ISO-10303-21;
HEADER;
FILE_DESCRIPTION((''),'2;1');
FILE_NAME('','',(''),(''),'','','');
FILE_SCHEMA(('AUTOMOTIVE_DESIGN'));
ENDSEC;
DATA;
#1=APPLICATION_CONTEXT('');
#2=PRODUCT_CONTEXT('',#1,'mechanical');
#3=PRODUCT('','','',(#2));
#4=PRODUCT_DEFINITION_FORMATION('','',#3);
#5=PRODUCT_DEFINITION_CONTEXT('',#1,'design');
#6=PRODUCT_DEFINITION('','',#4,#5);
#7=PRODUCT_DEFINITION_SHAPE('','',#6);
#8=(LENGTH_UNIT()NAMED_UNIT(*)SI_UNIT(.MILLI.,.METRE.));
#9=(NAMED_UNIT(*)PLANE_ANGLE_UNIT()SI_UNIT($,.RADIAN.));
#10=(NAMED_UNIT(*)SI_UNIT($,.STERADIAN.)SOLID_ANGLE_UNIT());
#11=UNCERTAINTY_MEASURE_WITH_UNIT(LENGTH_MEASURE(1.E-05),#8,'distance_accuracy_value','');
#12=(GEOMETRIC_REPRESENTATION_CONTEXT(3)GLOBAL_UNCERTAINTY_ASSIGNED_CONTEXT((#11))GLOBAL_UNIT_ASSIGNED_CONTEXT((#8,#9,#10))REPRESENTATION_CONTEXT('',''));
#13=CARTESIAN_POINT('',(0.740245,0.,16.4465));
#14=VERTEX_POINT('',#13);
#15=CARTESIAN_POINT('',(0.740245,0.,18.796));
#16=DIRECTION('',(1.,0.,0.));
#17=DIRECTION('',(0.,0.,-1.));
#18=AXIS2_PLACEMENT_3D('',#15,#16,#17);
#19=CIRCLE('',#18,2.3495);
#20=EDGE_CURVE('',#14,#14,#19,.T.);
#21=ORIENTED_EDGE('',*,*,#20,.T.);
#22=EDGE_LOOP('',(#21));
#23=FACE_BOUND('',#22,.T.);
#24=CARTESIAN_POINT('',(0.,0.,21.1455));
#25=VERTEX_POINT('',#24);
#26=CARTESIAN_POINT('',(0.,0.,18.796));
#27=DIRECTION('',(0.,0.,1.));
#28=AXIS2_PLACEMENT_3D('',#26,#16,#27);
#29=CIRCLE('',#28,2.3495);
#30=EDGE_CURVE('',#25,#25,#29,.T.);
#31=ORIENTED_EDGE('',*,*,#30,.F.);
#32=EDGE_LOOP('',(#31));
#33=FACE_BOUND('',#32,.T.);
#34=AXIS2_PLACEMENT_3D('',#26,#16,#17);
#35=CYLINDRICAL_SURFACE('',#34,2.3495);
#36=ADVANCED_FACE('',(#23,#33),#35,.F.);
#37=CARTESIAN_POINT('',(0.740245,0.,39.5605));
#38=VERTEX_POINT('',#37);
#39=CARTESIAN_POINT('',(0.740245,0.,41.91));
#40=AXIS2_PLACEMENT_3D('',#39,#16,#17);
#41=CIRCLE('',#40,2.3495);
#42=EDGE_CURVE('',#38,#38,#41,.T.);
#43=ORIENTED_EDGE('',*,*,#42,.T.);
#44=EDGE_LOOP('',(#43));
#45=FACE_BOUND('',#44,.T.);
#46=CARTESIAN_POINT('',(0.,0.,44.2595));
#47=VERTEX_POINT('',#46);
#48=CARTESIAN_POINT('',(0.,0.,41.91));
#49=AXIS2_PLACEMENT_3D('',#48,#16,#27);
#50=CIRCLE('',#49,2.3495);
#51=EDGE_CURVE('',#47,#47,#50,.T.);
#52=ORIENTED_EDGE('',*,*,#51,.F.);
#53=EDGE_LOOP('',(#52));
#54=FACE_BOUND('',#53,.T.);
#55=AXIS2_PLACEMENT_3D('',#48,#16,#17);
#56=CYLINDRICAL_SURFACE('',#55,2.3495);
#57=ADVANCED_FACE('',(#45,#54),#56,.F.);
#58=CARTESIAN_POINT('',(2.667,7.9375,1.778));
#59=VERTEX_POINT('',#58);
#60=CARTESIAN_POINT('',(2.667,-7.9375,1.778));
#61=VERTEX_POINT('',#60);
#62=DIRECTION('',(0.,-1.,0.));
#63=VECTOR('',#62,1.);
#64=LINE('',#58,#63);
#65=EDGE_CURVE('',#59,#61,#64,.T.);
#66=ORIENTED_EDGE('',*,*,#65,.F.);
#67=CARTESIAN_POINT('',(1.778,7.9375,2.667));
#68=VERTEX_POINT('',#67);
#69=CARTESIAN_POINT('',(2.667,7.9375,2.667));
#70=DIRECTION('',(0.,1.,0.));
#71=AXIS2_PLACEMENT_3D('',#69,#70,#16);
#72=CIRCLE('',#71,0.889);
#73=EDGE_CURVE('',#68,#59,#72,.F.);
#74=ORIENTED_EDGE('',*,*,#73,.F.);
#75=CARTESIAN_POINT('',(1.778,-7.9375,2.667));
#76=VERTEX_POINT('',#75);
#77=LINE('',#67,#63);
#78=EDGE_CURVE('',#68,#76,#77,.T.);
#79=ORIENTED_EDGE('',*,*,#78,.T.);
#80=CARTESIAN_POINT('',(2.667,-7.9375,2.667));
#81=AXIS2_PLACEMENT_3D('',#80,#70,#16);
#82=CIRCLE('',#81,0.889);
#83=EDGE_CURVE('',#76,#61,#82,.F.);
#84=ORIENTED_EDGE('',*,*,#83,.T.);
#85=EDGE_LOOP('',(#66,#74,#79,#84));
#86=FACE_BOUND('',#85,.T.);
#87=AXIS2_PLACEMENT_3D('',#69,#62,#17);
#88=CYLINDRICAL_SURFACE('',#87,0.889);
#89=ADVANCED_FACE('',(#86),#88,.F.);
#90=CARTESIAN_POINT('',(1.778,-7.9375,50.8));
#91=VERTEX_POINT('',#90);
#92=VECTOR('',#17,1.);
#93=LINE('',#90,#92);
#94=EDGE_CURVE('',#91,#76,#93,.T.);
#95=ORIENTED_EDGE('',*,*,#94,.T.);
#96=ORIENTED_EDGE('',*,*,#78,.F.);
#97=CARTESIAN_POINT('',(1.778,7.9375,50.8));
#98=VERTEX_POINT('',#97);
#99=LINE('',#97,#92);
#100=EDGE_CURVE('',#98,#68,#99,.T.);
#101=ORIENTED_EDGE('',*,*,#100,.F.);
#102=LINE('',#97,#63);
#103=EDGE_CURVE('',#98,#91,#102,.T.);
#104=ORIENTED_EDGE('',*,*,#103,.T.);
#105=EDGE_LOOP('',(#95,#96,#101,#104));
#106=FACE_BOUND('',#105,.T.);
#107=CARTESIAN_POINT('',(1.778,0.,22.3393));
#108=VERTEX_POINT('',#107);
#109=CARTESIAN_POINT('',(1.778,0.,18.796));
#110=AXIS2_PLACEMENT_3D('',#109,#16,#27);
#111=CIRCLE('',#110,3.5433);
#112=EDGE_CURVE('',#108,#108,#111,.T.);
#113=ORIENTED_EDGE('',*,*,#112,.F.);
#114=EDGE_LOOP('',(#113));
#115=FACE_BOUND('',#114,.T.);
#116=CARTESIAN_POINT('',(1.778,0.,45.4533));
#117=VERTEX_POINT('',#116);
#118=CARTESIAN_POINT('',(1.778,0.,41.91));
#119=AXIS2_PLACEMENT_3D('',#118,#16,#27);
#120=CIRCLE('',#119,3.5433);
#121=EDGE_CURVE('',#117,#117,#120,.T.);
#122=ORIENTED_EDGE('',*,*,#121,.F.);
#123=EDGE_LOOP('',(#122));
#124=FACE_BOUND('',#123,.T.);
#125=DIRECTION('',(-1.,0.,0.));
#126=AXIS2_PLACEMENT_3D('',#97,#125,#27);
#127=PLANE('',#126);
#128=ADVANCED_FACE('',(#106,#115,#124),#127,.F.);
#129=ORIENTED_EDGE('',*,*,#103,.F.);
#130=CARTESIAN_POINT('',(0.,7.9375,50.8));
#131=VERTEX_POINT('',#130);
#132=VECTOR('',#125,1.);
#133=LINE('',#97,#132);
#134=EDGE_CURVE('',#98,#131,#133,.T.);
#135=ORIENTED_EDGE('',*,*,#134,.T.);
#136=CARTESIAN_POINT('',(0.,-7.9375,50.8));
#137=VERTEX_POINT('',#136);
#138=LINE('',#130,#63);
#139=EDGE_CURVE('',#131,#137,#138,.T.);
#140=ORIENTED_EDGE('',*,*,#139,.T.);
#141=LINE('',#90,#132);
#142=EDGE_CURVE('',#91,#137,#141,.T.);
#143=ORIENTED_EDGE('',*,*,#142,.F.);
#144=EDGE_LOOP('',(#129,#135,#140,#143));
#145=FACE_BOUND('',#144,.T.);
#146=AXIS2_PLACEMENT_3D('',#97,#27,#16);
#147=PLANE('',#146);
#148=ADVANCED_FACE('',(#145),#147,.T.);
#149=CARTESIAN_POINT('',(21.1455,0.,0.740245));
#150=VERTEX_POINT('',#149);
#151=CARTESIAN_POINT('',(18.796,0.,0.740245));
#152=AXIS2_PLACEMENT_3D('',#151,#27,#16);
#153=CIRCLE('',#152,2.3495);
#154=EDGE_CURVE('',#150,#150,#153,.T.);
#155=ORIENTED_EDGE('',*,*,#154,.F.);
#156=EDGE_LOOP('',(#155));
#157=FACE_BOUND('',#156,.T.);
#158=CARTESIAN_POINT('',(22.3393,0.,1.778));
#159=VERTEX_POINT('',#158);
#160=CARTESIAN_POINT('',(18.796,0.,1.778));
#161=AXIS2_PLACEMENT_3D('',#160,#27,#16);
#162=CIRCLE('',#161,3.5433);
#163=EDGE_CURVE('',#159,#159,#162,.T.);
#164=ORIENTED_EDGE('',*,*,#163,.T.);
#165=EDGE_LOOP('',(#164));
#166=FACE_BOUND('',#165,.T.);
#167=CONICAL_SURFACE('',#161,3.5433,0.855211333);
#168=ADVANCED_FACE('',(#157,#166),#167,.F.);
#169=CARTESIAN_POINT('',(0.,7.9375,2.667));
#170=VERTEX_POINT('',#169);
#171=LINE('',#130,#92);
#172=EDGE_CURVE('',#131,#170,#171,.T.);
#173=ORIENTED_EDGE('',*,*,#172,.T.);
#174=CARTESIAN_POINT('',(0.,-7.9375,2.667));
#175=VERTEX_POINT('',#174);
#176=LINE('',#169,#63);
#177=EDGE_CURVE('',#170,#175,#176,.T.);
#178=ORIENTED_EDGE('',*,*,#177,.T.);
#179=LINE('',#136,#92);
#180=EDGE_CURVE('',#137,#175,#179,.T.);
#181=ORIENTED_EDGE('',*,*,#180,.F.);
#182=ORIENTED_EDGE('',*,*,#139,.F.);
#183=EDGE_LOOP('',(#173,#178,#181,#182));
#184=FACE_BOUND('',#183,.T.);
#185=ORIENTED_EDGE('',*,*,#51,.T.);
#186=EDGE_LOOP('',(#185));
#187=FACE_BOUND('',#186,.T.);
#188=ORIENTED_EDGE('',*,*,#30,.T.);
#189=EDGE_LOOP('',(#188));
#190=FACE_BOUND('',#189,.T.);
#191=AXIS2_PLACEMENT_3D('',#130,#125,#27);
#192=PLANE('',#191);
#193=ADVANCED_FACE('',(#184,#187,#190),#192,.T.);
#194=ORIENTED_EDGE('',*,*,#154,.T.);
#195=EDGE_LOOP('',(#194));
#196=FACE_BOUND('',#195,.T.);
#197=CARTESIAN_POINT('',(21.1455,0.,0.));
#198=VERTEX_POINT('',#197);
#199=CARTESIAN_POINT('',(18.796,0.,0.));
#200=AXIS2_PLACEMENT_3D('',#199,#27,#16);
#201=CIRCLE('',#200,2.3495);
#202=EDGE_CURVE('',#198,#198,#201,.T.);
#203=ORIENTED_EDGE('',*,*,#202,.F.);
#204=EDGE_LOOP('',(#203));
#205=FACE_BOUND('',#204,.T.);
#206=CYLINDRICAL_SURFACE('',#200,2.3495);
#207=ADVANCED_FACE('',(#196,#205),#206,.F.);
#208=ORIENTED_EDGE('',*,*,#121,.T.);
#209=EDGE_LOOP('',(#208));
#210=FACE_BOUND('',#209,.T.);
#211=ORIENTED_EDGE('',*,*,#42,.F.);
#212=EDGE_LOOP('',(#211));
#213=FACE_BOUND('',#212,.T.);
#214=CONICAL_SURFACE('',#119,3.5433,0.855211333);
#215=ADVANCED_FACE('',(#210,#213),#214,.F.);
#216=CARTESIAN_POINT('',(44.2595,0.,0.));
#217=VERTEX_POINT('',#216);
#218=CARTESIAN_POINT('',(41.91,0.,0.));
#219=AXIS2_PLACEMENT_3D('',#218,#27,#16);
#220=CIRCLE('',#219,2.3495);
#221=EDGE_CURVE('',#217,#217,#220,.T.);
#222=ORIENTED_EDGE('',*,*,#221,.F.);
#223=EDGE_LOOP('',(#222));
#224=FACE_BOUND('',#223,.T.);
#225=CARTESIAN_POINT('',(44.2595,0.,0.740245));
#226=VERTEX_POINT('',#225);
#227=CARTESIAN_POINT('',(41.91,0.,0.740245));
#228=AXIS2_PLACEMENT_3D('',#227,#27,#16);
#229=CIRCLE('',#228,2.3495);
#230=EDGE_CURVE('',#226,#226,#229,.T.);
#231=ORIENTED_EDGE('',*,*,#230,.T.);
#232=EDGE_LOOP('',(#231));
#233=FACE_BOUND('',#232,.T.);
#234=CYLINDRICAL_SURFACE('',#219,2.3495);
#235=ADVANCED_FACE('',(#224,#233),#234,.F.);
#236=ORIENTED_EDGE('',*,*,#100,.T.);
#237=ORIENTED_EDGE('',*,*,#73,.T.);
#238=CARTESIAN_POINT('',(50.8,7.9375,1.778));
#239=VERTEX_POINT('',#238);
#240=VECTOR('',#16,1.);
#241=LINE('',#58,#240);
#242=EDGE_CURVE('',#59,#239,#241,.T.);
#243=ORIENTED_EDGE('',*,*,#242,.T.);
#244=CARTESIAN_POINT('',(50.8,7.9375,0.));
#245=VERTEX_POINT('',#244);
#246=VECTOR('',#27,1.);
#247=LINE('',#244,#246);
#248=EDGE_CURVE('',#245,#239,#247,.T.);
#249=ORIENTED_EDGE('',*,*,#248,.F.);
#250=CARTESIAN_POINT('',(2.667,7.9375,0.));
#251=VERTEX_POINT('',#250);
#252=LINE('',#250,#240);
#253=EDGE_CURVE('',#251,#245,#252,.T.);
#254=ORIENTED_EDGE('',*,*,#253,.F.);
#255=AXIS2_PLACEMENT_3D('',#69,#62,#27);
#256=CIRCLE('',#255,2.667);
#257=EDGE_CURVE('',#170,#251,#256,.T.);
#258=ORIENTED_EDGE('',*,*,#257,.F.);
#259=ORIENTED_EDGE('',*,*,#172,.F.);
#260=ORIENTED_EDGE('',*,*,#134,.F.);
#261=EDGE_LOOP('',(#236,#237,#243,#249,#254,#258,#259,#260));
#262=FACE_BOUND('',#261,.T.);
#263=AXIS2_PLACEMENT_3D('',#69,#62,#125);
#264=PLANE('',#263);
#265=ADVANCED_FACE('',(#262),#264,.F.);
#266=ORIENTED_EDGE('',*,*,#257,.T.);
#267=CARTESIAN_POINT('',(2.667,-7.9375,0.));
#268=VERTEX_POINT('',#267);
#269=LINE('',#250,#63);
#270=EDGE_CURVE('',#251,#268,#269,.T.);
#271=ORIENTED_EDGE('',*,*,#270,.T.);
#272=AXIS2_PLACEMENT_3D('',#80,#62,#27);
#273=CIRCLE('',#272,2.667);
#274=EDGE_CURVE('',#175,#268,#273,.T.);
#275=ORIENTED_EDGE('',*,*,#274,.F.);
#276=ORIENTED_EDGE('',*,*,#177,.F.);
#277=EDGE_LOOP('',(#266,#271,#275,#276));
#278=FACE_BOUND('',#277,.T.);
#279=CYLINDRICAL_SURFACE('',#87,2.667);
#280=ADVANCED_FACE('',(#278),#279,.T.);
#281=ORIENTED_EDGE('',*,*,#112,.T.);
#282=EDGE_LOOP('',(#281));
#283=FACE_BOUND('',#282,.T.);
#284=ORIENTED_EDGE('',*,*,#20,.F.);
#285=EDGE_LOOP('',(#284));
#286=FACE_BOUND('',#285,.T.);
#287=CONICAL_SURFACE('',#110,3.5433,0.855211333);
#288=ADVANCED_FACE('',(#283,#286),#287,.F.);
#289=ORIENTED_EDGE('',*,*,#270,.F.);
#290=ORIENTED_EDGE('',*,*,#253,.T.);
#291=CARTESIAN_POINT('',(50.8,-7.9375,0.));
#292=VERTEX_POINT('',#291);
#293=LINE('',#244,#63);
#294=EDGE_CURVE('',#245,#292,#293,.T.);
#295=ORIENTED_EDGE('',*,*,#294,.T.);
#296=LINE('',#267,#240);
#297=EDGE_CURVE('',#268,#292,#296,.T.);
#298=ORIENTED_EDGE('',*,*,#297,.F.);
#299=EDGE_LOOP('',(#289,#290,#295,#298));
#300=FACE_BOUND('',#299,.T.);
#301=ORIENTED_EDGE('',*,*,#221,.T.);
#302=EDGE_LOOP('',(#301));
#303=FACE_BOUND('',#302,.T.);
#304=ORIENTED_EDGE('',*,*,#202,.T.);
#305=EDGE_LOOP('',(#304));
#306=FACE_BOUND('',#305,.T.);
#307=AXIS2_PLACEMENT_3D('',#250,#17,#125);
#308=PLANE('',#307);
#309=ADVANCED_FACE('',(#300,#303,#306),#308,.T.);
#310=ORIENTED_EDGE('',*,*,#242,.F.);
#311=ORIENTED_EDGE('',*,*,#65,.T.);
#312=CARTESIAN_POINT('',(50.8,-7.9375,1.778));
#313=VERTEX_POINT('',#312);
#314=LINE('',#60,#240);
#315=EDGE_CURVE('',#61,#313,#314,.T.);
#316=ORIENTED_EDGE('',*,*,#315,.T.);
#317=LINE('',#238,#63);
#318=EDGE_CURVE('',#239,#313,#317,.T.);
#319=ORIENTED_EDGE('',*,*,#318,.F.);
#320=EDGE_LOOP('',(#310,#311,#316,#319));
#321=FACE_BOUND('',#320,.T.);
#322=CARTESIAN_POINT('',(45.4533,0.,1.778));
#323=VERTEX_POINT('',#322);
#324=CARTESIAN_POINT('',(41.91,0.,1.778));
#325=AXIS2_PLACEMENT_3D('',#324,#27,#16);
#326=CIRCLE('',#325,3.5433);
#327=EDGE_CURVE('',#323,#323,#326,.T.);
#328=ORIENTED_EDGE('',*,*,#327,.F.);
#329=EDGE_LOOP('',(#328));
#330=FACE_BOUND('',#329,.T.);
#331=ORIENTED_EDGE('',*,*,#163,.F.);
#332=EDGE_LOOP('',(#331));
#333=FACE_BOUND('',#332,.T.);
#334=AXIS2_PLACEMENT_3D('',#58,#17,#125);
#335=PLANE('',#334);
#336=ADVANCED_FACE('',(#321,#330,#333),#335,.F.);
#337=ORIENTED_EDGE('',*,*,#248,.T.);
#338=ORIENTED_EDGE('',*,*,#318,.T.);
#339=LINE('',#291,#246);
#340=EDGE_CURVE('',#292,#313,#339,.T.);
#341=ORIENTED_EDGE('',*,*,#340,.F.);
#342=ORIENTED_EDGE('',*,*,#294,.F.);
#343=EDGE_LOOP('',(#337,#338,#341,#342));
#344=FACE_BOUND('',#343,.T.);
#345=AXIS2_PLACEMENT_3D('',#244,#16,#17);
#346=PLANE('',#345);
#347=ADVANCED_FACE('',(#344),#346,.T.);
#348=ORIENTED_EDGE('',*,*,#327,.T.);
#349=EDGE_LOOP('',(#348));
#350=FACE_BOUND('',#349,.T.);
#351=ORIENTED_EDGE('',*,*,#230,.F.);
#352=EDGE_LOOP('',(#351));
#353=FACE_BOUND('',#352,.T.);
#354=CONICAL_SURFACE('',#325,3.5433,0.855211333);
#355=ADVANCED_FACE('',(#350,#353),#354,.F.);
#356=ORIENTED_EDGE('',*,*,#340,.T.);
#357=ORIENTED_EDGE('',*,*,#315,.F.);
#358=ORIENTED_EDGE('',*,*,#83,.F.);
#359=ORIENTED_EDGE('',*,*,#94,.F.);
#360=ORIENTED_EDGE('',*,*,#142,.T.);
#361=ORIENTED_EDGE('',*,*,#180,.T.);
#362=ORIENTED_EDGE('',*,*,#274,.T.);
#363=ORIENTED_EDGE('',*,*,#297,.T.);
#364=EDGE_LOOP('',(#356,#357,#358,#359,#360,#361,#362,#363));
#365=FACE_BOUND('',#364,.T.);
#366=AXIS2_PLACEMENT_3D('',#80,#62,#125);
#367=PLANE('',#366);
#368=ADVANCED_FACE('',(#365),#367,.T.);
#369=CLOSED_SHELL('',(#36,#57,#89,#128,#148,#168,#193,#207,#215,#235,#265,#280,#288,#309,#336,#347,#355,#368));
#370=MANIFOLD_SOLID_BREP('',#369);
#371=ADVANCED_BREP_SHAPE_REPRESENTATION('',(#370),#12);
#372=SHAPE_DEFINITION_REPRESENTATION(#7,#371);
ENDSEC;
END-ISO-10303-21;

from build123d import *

# Parameters (mm, degrees)
EXTRUDE_THIN1_START          = -7.9375
EXTRUDE_THIN1_DEPTH          = 15.875
SKETCH4_R                    = 2.3495
EXTRUDE3_DEPTH               = 69.543095394
SKETCH7_R                    = 3.5433
CUT_EXTRUDE1_DEPTH           = 72.040836075
CUT_EXTRUDE1_DRAFT           = -49
CUT_EXTRUDE1_PROFILE_2_DEPTH = 72.040836075
CUT_EXTRUDE1_PROFILE_2_DRAFT = -49
CIRPATTERN1_COUNT            = 2
CIRPATTERN1_COPY_1_SKETCH_R  = 3.5433
CIRPATTERN1_COPY_1_DEPTH     = 72.040836075
CIRPATTERN1_COPY_1_DRAFT     = -49
CIRPATTERN1_COPY_2_SKETCH_R  = 3.5433
CIRPATTERN1_COPY_2_DEPTH     = 72.040836075
CIRPATTERN1_COPY_2_DRAFT     = -49
CIRPATTERN1_COPY_3_SKETCH_R  = 3.5433
CIRPATTERN1_COPY_3_DEPTH     = 72.040836075
CIRPATTERN1_COPY_3_DRAFT     = -49


# Read off the part's stored shape, not the designer's step: Extrude-Thin1
with BuildPart() as part:
    # Extrude-Thin1 outline → Extrude-Thin1 (new body)
    with BuildSketch(Plane(origin=(0, 0, 0), x_dir=(1, 0, 0), z_dir=(0, 1, 0)).offset(EXTRUDE_THIN1_START)):
        with BuildLine():
            Line((2.667, -1.778), (50.8, -1.778))
            Line((50.8, -1.778), (50.8, 0))
            Line((50.8, 0), (2.667, 0))
            ThreePointArc((2.667, 0), (0.781146215, -0.781146215), (0, -2.667))
            Line((0, -2.667), (0, -50.8))
            Line((0, -50.8), (1.778, -50.8))
            Line((1.778, -50.8), (1.778, -2.667))
            ThreePointArc((1.778, -2.667), (2.038382072, -2.038382072), (2.667, -1.778))
        make_face()
    extrude(amount=EXTRUDE_THIN1_DEPTH)

    # Sketch4 → Extrude3 (cut, through all)
    with BuildSketch(Plane(origin=(3.556, 0, 1.778), x_dir=(1, 0, 0), z_dir=(0, 0, 1))):
        with Locations((38.354, 0)):
            Circle(SKETCH4_R)
        with Locations((15.24, 0)):
            Circle(SKETCH4_R)
    extrude3 = extrude(amount=-EXTRUDE3_DEPTH, mode=Mode.SUBTRACT)


with BuildPart() as cut_extrude1_tool:
    # Sketch7 → Cut-Extrude1 (with draft: the straight prism first)
    with BuildSketch(Plane.XY.offset(1.778)):
        with Locations((41.91, 0)):
            Circle(SKETCH7_R)
    extrude(amount=-CUT_EXTRUDE1_DEPTH)
    # Cut-Extrude1: the draft: its side faces are tilted about the plane it starts from
    cut_extrude1_sides = [cut_extrude1_tool.faces().sort_by_distance(p)[0] for p in [
        (38.3667, 0, -34.242418038),
    ]]
    draft(cut_extrude1_sides, Plane.XY.offset(1.778), CUT_EXTRUDE1_DRAFT)


with BuildPart() as part_1:
    add(part.part)

    # Cut-Extrude1: cut by cut_extrude1_tool
    add(cut_extrude1_tool.part, mode=Mode.SUBTRACT)


with BuildPart() as cut_extrude1_profile_2_tool:
    # Sketch7 → Cut-Extrude1 profile 2 (with draft: the straight prism first)
    with BuildSketch(Plane.XY.offset(1.778)):
        with Locations((18.796, 0)):
            Circle(SKETCH7_R)
    extrude(amount=-CUT_EXTRUDE1_PROFILE_2_DEPTH)
    # Cut-Extrude1 profile 2: the draft: its side faces are tilted about the plane it starts from
    cut_extrude1_profile_2_sides = [cut_extrude1_profile_2_tool.faces().sort_by_distance(p)[0] for p in [
        (15.2527, 0, -34.242418038),
    ]]
    draft(cut_extrude1_profile_2_sides, Plane.XY.offset(1.778), CUT_EXTRUDE1_PROFILE_2_DRAFT)


with BuildPart() as part_2:
    add(part_1.part)

    # Cut-Extrude1 profile 2: cut by cut_extrude1_profile_2_tool
    add(cut_extrude1_profile_2_tool.part, mode=Mode.SUBTRACT)

    # CirPattern1: Extrude3 ×2 about axis
    cirpattern1_axis = Axis((0, 0, 0), (0.7071067811865464, 0, 0.7071067811865487))
    for i in range(1, CIRPATTERN1_COUNT):
        add(extrude3.rotate(cirpattern1_axis, i * 360 / CIRPATTERN1_COUNT), mode=Mode.SUBTRACT)


with BuildPart() as cirpattern1_copy_1_tool:
    # CirPattern1 copy 1 sketch → CirPattern1 copy 1 (with draft: the straight prism first)
    with BuildSketch(Plane(origin=(1.778, 0, 0), x_dir=(0, 0, 1), z_dir=(1, 0, 0))):
        with Locations((41.91, 0)):
            Circle(CIRPATTERN1_COPY_1_SKETCH_R)
    extrude(amount=-CIRPATTERN1_COPY_1_DEPTH)
    # CirPattern1 copy 1: the draft: its side faces are tilted about the plane it starts from
    cirpattern1_copy_1_sides = [cirpattern1_copy_1_tool.faces().sort_by_distance(p)[0] for p in [
        (-34.242418038, 0, 38.3667),
    ]]
    draft(cirpattern1_copy_1_sides, Plane(origin=(1.778, 0, 0), x_dir=(0, 0, 1), z_dir=(1, 0, 0)), CIRPATTERN1_COPY_1_DRAFT)


with BuildPart() as part_3:
    add(part_2.part)

    # CirPattern1 copy 1: cut by cirpattern1_copy_1_tool
    add(cirpattern1_copy_1_tool.part, mode=Mode.SUBTRACT)


with BuildPart() as cirpattern1_copy_2_tool:
    # CirPattern1 copy 2 sketch → CirPattern1 copy 2 (with draft: the straight prism first)
    with BuildSketch(Plane(origin=(1.778, 0, 0), x_dir=(0, 0, 1), z_dir=(1, 0, 0))):
        with Locations((18.796, 0)):
            Circle(CIRPATTERN1_COPY_2_SKETCH_R)
    extrude(amount=-CIRPATTERN1_COPY_2_DEPTH)
    # CirPattern1 copy 2: the draft: its side faces are tilted about the plane it starts from
    cirpattern1_copy_2_sides = [cirpattern1_copy_2_tool.faces().sort_by_distance(p)[0] for p in [
        (-34.242418038, 0, 15.2527),
    ]]
    draft(cirpattern1_copy_2_sides, Plane(origin=(1.778, 0, 0), x_dir=(0, 0, 1), z_dir=(1, 0, 0)), CIRPATTERN1_COPY_2_DRAFT)


with BuildPart() as part_4:
    add(part_3.part)

    # CirPattern1 copy 2: cut by cirpattern1_copy_2_tool
    add(cirpattern1_copy_2_tool.part, mode=Mode.SUBTRACT)


with BuildPart() as cirpattern1_copy_3_tool:
    # CirPattern1 copy 3 sketch → CirPattern1 copy 3 (with draft: the straight prism first)
    with BuildSketch(Plane(origin=(1.778, 0, 0), x_dir=(0, 0, 1), z_dir=(1, 0, 0))):
        with Locations((18.796, 0)):
            Circle(CIRPATTERN1_COPY_3_SKETCH_R)
    extrude(amount=-CIRPATTERN1_COPY_3_DEPTH)
    # CirPattern1 copy 3: the draft: its side faces are tilted about the plane it starts from
    cirpattern1_copy_3_sides = [cirpattern1_copy_3_tool.faces().sort_by_distance(p)[0] for p in [
        (-34.242418038, 0, 15.2527),
    ]]
    draft(cirpattern1_copy_3_sides, Plane(origin=(1.778, 0, 0), x_dir=(0, 0, 1), z_dir=(1, 0, 0)), CIRPATTERN1_COPY_3_DRAFT)


with BuildPart() as part_5:
    add(part_4.part)

    # CirPattern1 copy 3: cut by cirpattern1_copy_3_tool
    add(cirpattern1_copy_3_tool.part, mode=Mode.SUBTRACT)


solid = part_5.part
